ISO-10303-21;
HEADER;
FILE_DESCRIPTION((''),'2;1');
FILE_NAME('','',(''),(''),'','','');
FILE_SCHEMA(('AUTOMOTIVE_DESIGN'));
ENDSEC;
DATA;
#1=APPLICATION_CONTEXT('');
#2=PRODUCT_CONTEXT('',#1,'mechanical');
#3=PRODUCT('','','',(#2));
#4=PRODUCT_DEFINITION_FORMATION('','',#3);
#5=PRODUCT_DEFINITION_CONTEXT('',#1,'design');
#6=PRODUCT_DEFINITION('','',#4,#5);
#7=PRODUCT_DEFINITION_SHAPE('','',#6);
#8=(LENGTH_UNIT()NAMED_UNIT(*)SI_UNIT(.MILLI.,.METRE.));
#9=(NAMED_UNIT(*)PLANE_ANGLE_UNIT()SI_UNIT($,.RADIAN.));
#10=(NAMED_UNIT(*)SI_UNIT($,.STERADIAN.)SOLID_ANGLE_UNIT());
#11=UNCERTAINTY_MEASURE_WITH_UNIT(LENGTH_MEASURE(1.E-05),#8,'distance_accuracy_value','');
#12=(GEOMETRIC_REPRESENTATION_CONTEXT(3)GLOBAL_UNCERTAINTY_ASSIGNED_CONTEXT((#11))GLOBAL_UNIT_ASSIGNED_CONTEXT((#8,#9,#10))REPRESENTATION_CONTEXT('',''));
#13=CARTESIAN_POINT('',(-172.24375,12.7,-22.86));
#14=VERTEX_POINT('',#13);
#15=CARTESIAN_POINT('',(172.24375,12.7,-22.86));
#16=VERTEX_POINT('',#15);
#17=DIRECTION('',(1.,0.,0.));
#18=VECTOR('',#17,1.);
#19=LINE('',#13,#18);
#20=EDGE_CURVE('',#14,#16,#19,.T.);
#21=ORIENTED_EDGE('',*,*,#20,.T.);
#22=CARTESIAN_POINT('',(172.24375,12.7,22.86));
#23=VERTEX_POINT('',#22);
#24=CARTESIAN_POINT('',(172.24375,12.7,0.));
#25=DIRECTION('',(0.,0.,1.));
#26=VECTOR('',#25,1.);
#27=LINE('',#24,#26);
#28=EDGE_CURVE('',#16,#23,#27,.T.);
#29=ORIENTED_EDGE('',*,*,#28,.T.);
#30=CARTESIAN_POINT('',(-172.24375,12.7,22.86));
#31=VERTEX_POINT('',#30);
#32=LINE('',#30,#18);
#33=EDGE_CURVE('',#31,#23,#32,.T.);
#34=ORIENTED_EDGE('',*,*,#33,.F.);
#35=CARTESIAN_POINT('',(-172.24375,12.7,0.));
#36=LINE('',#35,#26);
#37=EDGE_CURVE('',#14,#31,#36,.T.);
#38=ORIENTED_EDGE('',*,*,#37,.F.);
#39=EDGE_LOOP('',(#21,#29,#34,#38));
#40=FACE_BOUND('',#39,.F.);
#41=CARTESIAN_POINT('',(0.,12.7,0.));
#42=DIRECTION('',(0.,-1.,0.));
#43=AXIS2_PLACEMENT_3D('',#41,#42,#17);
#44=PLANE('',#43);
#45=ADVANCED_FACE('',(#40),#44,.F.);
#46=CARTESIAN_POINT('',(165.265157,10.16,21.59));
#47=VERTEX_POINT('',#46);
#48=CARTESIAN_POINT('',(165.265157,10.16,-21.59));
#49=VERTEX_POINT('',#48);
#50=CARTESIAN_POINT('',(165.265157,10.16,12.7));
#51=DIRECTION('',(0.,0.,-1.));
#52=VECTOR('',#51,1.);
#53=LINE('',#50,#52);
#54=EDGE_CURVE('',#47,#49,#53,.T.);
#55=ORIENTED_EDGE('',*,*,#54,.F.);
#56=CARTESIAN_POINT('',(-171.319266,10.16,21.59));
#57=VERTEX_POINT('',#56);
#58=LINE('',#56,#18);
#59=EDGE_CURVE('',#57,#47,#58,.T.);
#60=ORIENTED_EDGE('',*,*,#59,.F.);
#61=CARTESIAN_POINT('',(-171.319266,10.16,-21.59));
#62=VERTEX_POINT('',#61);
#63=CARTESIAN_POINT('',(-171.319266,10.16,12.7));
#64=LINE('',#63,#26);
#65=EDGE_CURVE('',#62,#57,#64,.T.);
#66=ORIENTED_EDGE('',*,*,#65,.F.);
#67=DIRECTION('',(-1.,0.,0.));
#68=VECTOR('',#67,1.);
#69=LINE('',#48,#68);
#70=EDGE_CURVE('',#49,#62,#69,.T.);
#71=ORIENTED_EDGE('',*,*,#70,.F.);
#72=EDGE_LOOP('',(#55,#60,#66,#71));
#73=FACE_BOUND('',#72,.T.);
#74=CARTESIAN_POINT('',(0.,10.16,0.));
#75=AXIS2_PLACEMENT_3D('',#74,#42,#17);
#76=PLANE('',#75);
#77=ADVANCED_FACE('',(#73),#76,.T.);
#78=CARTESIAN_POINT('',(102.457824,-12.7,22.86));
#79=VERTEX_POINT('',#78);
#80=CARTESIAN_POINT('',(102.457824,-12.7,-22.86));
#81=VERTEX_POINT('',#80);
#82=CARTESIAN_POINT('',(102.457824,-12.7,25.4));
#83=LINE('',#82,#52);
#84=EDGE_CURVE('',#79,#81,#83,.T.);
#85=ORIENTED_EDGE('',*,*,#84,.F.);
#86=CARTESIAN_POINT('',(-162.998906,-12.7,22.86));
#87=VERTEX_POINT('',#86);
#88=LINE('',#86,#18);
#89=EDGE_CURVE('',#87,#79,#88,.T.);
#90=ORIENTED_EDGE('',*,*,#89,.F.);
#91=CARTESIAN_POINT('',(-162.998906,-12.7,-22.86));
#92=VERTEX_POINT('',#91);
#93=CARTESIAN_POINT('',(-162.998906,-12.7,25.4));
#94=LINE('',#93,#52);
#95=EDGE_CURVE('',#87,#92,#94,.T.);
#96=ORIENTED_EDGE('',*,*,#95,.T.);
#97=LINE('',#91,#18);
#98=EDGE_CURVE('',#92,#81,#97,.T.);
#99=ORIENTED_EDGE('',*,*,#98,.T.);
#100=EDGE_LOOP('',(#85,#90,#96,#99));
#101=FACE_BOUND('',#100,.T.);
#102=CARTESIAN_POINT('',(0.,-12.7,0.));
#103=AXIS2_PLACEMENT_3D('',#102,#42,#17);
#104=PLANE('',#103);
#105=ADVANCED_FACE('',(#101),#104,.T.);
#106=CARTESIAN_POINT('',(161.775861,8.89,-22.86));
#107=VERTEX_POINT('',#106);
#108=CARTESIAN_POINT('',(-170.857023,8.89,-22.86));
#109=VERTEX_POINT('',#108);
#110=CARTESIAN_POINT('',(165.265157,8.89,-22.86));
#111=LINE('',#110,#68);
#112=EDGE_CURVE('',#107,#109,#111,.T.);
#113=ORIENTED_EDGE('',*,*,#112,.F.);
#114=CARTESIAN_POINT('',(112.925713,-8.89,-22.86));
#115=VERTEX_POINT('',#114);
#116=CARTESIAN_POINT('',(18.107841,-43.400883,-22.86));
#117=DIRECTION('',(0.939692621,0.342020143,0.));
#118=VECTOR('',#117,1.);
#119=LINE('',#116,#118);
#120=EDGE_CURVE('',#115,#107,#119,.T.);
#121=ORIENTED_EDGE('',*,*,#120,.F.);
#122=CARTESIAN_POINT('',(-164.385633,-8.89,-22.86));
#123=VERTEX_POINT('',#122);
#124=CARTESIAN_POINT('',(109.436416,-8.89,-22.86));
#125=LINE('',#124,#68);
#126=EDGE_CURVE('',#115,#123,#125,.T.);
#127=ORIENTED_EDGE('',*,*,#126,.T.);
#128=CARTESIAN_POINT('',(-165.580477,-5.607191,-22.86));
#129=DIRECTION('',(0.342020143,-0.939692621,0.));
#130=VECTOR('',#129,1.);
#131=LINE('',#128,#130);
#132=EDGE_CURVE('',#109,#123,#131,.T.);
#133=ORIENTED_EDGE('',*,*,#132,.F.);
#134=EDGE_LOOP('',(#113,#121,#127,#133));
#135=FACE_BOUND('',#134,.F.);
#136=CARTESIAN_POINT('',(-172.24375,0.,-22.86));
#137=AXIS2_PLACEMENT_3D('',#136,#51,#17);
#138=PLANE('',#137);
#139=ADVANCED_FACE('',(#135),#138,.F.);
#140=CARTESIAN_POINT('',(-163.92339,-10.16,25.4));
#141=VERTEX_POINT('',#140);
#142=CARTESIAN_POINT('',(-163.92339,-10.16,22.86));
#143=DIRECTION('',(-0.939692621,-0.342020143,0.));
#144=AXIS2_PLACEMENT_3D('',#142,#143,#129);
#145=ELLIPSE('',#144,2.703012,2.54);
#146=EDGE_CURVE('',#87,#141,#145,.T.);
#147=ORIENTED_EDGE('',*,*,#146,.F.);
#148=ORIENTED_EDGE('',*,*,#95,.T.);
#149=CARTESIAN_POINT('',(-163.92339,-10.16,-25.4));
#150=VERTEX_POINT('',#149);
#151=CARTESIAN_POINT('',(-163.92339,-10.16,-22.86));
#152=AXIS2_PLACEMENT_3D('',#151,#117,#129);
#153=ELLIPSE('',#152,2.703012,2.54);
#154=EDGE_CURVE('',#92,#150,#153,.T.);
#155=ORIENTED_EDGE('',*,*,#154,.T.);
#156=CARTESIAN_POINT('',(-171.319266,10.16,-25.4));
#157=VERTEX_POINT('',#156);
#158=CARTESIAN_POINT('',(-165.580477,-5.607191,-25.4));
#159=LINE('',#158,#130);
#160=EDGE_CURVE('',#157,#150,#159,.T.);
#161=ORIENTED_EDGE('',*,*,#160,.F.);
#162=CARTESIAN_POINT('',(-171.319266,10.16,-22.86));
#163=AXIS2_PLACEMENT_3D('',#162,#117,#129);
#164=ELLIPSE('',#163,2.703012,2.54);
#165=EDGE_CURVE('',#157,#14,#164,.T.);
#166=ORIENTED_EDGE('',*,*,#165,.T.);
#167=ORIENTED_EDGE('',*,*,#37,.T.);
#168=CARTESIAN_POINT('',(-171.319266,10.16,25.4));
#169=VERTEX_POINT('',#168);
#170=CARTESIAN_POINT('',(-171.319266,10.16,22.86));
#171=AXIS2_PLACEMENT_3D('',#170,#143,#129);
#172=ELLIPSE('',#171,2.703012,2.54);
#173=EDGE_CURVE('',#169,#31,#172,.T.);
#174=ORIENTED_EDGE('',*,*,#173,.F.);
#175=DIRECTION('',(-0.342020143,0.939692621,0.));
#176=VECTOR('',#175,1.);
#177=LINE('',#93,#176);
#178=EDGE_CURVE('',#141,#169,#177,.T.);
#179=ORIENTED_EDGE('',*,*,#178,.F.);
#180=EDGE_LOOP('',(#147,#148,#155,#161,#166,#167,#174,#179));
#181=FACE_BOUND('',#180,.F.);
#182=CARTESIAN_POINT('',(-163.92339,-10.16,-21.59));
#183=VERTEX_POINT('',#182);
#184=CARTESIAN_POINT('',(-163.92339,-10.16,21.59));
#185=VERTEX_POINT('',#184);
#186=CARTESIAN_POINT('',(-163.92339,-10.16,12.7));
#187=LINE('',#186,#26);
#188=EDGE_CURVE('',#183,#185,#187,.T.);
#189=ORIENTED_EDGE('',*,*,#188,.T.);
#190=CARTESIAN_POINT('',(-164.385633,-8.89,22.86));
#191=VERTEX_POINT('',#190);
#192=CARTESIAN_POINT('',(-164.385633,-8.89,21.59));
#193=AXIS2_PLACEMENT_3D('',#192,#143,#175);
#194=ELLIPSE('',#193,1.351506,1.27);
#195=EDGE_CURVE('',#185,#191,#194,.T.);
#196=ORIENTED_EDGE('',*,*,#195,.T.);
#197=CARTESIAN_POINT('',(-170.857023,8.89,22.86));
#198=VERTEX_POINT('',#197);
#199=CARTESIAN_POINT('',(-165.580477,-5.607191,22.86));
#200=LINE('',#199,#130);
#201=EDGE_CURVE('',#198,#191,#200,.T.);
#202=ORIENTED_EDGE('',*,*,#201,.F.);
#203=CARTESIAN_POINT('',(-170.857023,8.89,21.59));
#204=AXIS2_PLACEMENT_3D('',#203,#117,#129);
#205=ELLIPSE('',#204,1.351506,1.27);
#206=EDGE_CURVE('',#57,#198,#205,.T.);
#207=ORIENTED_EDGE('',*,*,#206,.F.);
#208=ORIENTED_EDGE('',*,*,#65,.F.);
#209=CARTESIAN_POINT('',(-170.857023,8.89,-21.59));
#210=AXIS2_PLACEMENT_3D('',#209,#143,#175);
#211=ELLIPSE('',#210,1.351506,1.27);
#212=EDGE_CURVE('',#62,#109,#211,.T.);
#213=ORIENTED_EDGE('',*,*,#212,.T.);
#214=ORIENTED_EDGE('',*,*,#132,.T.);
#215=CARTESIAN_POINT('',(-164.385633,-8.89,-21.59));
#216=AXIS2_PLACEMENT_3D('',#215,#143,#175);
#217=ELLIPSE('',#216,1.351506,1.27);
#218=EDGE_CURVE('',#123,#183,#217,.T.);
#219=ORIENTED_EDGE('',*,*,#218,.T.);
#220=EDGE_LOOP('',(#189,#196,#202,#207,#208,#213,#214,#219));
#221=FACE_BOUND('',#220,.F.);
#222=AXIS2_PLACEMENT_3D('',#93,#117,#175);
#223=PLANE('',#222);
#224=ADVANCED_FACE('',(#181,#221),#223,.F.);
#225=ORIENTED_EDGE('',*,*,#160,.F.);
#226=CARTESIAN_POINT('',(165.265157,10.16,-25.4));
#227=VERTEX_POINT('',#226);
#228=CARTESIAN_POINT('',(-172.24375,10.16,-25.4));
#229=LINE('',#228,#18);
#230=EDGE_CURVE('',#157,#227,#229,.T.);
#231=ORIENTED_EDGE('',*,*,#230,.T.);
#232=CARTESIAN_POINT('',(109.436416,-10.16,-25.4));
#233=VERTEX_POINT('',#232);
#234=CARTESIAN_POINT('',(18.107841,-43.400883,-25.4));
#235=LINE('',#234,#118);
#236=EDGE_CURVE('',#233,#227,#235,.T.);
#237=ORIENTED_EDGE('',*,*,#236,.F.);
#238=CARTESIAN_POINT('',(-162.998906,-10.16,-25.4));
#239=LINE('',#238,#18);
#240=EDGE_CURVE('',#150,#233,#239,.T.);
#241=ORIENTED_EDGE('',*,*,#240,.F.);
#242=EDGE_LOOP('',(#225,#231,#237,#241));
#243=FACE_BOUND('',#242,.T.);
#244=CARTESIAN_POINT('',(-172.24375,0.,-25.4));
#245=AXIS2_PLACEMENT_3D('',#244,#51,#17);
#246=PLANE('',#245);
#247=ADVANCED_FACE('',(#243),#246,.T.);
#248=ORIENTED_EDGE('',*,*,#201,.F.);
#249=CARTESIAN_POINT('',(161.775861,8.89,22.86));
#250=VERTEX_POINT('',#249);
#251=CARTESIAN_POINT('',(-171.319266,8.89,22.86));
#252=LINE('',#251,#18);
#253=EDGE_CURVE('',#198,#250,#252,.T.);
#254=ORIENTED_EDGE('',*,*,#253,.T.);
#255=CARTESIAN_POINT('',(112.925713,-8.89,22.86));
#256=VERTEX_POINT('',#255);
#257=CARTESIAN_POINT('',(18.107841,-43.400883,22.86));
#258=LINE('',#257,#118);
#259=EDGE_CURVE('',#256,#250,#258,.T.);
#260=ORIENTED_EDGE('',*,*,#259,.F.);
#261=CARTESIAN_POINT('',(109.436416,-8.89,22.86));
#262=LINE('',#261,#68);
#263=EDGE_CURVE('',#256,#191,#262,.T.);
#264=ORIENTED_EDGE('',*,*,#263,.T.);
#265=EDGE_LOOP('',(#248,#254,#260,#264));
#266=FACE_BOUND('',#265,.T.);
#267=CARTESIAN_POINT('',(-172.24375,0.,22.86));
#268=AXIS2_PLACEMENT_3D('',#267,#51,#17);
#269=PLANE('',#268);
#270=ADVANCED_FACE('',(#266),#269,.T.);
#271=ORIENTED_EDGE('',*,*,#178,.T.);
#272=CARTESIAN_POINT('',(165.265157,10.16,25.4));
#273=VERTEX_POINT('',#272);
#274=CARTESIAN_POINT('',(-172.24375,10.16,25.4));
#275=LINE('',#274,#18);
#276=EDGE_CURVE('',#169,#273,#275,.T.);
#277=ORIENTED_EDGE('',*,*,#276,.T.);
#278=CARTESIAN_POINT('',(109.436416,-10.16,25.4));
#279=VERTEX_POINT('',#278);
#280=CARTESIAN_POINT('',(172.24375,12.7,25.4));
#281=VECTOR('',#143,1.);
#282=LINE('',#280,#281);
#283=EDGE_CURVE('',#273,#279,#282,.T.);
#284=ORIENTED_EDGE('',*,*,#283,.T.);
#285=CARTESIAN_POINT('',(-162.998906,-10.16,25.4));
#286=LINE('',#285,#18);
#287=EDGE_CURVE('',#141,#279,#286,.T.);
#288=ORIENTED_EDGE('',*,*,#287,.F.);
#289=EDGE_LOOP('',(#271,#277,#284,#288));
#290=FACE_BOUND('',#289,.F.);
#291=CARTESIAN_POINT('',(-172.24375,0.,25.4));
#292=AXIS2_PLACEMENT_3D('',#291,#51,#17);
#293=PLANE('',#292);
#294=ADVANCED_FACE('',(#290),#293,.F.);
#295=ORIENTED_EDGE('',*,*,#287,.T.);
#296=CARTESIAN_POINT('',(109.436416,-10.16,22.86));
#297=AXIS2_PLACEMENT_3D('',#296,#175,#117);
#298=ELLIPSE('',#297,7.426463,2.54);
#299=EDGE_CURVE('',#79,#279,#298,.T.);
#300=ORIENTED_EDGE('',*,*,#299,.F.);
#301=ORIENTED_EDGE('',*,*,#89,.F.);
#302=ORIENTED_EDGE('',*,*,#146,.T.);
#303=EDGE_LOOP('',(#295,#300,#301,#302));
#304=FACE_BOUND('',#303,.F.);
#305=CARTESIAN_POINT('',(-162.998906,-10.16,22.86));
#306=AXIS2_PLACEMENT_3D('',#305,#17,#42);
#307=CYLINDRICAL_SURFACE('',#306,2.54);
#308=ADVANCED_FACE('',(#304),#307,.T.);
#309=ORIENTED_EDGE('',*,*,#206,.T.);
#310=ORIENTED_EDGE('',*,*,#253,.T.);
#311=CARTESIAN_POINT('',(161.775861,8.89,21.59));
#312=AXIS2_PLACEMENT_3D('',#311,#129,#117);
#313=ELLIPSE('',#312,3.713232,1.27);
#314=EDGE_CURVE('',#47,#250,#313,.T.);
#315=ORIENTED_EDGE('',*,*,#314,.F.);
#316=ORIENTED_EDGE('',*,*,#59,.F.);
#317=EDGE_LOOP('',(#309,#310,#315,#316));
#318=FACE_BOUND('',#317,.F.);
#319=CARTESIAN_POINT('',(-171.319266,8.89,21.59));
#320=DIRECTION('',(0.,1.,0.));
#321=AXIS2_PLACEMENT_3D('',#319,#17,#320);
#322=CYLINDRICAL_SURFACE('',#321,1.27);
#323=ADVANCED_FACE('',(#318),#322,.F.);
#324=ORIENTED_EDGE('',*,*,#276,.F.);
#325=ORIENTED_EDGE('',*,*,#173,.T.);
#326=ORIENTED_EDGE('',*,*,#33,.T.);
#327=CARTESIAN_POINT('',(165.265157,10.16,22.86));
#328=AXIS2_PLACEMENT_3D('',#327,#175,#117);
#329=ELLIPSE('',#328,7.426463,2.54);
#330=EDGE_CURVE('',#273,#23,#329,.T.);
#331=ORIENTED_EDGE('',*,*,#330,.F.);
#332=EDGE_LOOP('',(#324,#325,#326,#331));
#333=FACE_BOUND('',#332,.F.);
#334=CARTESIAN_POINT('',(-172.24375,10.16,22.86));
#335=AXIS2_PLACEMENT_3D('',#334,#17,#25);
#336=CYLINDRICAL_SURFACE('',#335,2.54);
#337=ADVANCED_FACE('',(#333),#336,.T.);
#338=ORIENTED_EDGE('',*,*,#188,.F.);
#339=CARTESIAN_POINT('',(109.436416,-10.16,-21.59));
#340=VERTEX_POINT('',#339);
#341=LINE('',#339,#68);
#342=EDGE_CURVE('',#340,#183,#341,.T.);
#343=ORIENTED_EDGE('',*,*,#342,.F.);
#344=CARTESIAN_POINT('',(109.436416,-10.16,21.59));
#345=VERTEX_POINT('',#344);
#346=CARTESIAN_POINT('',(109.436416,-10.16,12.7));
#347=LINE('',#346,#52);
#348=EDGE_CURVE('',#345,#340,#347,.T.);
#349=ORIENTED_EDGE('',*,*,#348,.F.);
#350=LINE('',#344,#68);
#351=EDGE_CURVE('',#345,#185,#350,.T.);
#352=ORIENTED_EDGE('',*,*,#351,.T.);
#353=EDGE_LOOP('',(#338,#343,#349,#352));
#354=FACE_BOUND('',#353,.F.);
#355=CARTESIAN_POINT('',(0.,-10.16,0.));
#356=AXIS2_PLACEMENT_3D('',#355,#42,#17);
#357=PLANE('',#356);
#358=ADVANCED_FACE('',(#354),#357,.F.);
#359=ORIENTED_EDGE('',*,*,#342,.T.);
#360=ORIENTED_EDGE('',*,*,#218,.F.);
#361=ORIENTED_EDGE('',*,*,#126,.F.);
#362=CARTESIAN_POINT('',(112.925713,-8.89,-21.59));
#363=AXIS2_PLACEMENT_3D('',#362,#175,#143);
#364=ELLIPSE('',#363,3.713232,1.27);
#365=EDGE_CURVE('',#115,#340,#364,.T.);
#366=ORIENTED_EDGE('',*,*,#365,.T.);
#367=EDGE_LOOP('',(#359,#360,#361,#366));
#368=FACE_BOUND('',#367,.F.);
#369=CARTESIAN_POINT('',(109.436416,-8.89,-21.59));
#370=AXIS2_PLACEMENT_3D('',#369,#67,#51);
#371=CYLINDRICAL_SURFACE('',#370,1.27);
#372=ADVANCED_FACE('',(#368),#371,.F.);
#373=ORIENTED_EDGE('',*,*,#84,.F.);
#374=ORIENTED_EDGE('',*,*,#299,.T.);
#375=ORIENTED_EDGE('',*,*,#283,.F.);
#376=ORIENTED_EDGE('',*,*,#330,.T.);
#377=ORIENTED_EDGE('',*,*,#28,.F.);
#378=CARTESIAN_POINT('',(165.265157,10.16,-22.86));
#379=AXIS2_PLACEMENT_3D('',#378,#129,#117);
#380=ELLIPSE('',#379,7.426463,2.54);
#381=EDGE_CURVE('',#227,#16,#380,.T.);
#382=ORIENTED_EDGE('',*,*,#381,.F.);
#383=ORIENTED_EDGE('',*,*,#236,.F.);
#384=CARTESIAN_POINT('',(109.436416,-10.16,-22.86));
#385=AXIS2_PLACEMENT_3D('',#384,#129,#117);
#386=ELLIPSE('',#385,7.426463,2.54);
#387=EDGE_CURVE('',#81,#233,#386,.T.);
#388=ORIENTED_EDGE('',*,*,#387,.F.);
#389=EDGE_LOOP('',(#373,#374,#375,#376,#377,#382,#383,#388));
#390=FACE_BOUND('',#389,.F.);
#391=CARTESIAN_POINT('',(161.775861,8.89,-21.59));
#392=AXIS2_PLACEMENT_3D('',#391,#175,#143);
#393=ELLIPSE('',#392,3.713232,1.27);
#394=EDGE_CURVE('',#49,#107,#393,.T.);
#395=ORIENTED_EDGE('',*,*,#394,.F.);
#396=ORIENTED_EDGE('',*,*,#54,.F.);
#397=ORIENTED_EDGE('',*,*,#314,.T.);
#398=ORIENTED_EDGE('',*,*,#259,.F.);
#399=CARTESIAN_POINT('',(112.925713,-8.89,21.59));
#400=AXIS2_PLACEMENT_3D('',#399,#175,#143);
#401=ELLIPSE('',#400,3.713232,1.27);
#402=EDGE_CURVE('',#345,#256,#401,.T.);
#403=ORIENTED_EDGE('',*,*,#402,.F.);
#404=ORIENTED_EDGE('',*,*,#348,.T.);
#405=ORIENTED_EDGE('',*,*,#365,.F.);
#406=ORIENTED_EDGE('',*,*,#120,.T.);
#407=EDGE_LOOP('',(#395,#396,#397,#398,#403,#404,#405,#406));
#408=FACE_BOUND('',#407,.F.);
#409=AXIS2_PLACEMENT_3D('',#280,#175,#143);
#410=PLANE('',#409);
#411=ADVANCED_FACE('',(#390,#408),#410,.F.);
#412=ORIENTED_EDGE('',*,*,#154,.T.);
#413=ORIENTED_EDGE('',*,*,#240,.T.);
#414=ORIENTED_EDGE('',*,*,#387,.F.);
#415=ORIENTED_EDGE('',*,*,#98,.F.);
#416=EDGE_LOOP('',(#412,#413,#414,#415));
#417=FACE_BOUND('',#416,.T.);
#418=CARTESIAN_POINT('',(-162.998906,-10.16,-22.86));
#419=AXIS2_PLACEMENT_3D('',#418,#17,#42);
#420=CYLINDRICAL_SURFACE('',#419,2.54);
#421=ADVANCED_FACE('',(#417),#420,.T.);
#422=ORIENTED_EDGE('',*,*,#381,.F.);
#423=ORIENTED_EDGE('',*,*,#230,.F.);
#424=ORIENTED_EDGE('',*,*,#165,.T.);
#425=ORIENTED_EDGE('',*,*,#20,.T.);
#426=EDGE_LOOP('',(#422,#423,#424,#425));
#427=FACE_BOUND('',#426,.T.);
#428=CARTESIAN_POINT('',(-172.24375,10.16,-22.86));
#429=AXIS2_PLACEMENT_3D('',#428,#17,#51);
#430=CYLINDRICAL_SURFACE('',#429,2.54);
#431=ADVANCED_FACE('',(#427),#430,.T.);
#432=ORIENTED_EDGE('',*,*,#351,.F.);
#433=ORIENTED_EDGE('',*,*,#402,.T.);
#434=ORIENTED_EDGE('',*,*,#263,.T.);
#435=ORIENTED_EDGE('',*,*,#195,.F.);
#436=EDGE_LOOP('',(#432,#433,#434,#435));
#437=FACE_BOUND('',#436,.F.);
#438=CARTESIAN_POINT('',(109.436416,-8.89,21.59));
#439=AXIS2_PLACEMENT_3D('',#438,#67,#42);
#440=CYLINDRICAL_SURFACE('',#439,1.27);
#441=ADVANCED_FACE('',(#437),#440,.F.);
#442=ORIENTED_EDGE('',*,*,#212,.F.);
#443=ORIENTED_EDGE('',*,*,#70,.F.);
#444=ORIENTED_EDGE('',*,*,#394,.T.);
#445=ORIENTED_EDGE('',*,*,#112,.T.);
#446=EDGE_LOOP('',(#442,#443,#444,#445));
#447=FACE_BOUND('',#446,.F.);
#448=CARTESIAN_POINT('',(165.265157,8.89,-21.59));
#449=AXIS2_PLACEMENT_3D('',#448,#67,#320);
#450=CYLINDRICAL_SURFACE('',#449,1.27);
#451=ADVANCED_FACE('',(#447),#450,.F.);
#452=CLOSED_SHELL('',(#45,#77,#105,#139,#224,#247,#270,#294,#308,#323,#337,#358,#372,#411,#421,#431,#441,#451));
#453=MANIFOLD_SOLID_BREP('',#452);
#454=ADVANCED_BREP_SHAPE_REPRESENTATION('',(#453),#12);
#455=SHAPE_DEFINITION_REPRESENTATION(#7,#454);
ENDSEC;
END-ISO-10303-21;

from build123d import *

# Parameters (mm, degrees)
F0_W     = 344.4875
F0_H     = 50.8
F1_DEPTH = 12.7
F2_T     = -2.54
F4_DEPTH = 50.801
F6_DEPTH = 50.801
F7_R     = 2.54
F8_R     = 1.27


# Not quite as in the source:
# - a feature names something its author has since deleted; it is built from what else it names


with BuildPart() as f1:
    # F0 (on Front) → F1 (new body, symmetric)
    with BuildSketch(Plane.XZ):
        Rectangle(F0_W, F0_H)
    extrude(amount=F1_DEPTH, both=True)

    # F2
    f2_openings = [f1.faces().sort_by_distance(p)[0] for p in [
        (-172.24375, 0, 0),
        (172.24375, 0, 0),
    ]]
    offset(amount=F2_T, openings=f2_openings)

    # F3 (on face) → F4 (cut, through all)
    with BuildSketch(Plane.XY.offset(25.4)):
        Polygon((-162.9989060496, -12.7), (-172.24375, 12.7), (-172.24375, -12.7), align=None)
    extrude(amount=-F4_DEPTH, mode=Mode.SUBTRACT)

    # F5 (on face) → F6 (cut, through all)
    with BuildSketch(Plane.XY.offset(25.4)):
        Polygon((172.24375, -12.7), (172.24375, 12.7), (102.4578235459, -12.7), align=None)
    extrude(amount=-F6_DEPTH, mode=Mode.SUBTRACT)

    # F7
    f7_edges = [f1.edges().sort_by_distance(p)[0] for p in [
        (-30.270541, -12.7, 25.4),
        (0, 12.7, 25.4),
        (0, 12.7, -25.4),
        (-30.270541, -12.7, -25.4),
    ]]
    fillet(f7_edges, radius=F7_R)

    # F8
    f8_edges = [f1.edges().sort_by_distance(p)[0] for p in [
        (-27.243487, -10.16, -22.86),
        (-27.243487, -10.16, 22.86),
        (-3.027054, 10.16, 22.86),
        (-3.027054, 10.16, -22.86),
    ]]
    fillet(f8_edges, radius=F8_R)


solid = f1.part
